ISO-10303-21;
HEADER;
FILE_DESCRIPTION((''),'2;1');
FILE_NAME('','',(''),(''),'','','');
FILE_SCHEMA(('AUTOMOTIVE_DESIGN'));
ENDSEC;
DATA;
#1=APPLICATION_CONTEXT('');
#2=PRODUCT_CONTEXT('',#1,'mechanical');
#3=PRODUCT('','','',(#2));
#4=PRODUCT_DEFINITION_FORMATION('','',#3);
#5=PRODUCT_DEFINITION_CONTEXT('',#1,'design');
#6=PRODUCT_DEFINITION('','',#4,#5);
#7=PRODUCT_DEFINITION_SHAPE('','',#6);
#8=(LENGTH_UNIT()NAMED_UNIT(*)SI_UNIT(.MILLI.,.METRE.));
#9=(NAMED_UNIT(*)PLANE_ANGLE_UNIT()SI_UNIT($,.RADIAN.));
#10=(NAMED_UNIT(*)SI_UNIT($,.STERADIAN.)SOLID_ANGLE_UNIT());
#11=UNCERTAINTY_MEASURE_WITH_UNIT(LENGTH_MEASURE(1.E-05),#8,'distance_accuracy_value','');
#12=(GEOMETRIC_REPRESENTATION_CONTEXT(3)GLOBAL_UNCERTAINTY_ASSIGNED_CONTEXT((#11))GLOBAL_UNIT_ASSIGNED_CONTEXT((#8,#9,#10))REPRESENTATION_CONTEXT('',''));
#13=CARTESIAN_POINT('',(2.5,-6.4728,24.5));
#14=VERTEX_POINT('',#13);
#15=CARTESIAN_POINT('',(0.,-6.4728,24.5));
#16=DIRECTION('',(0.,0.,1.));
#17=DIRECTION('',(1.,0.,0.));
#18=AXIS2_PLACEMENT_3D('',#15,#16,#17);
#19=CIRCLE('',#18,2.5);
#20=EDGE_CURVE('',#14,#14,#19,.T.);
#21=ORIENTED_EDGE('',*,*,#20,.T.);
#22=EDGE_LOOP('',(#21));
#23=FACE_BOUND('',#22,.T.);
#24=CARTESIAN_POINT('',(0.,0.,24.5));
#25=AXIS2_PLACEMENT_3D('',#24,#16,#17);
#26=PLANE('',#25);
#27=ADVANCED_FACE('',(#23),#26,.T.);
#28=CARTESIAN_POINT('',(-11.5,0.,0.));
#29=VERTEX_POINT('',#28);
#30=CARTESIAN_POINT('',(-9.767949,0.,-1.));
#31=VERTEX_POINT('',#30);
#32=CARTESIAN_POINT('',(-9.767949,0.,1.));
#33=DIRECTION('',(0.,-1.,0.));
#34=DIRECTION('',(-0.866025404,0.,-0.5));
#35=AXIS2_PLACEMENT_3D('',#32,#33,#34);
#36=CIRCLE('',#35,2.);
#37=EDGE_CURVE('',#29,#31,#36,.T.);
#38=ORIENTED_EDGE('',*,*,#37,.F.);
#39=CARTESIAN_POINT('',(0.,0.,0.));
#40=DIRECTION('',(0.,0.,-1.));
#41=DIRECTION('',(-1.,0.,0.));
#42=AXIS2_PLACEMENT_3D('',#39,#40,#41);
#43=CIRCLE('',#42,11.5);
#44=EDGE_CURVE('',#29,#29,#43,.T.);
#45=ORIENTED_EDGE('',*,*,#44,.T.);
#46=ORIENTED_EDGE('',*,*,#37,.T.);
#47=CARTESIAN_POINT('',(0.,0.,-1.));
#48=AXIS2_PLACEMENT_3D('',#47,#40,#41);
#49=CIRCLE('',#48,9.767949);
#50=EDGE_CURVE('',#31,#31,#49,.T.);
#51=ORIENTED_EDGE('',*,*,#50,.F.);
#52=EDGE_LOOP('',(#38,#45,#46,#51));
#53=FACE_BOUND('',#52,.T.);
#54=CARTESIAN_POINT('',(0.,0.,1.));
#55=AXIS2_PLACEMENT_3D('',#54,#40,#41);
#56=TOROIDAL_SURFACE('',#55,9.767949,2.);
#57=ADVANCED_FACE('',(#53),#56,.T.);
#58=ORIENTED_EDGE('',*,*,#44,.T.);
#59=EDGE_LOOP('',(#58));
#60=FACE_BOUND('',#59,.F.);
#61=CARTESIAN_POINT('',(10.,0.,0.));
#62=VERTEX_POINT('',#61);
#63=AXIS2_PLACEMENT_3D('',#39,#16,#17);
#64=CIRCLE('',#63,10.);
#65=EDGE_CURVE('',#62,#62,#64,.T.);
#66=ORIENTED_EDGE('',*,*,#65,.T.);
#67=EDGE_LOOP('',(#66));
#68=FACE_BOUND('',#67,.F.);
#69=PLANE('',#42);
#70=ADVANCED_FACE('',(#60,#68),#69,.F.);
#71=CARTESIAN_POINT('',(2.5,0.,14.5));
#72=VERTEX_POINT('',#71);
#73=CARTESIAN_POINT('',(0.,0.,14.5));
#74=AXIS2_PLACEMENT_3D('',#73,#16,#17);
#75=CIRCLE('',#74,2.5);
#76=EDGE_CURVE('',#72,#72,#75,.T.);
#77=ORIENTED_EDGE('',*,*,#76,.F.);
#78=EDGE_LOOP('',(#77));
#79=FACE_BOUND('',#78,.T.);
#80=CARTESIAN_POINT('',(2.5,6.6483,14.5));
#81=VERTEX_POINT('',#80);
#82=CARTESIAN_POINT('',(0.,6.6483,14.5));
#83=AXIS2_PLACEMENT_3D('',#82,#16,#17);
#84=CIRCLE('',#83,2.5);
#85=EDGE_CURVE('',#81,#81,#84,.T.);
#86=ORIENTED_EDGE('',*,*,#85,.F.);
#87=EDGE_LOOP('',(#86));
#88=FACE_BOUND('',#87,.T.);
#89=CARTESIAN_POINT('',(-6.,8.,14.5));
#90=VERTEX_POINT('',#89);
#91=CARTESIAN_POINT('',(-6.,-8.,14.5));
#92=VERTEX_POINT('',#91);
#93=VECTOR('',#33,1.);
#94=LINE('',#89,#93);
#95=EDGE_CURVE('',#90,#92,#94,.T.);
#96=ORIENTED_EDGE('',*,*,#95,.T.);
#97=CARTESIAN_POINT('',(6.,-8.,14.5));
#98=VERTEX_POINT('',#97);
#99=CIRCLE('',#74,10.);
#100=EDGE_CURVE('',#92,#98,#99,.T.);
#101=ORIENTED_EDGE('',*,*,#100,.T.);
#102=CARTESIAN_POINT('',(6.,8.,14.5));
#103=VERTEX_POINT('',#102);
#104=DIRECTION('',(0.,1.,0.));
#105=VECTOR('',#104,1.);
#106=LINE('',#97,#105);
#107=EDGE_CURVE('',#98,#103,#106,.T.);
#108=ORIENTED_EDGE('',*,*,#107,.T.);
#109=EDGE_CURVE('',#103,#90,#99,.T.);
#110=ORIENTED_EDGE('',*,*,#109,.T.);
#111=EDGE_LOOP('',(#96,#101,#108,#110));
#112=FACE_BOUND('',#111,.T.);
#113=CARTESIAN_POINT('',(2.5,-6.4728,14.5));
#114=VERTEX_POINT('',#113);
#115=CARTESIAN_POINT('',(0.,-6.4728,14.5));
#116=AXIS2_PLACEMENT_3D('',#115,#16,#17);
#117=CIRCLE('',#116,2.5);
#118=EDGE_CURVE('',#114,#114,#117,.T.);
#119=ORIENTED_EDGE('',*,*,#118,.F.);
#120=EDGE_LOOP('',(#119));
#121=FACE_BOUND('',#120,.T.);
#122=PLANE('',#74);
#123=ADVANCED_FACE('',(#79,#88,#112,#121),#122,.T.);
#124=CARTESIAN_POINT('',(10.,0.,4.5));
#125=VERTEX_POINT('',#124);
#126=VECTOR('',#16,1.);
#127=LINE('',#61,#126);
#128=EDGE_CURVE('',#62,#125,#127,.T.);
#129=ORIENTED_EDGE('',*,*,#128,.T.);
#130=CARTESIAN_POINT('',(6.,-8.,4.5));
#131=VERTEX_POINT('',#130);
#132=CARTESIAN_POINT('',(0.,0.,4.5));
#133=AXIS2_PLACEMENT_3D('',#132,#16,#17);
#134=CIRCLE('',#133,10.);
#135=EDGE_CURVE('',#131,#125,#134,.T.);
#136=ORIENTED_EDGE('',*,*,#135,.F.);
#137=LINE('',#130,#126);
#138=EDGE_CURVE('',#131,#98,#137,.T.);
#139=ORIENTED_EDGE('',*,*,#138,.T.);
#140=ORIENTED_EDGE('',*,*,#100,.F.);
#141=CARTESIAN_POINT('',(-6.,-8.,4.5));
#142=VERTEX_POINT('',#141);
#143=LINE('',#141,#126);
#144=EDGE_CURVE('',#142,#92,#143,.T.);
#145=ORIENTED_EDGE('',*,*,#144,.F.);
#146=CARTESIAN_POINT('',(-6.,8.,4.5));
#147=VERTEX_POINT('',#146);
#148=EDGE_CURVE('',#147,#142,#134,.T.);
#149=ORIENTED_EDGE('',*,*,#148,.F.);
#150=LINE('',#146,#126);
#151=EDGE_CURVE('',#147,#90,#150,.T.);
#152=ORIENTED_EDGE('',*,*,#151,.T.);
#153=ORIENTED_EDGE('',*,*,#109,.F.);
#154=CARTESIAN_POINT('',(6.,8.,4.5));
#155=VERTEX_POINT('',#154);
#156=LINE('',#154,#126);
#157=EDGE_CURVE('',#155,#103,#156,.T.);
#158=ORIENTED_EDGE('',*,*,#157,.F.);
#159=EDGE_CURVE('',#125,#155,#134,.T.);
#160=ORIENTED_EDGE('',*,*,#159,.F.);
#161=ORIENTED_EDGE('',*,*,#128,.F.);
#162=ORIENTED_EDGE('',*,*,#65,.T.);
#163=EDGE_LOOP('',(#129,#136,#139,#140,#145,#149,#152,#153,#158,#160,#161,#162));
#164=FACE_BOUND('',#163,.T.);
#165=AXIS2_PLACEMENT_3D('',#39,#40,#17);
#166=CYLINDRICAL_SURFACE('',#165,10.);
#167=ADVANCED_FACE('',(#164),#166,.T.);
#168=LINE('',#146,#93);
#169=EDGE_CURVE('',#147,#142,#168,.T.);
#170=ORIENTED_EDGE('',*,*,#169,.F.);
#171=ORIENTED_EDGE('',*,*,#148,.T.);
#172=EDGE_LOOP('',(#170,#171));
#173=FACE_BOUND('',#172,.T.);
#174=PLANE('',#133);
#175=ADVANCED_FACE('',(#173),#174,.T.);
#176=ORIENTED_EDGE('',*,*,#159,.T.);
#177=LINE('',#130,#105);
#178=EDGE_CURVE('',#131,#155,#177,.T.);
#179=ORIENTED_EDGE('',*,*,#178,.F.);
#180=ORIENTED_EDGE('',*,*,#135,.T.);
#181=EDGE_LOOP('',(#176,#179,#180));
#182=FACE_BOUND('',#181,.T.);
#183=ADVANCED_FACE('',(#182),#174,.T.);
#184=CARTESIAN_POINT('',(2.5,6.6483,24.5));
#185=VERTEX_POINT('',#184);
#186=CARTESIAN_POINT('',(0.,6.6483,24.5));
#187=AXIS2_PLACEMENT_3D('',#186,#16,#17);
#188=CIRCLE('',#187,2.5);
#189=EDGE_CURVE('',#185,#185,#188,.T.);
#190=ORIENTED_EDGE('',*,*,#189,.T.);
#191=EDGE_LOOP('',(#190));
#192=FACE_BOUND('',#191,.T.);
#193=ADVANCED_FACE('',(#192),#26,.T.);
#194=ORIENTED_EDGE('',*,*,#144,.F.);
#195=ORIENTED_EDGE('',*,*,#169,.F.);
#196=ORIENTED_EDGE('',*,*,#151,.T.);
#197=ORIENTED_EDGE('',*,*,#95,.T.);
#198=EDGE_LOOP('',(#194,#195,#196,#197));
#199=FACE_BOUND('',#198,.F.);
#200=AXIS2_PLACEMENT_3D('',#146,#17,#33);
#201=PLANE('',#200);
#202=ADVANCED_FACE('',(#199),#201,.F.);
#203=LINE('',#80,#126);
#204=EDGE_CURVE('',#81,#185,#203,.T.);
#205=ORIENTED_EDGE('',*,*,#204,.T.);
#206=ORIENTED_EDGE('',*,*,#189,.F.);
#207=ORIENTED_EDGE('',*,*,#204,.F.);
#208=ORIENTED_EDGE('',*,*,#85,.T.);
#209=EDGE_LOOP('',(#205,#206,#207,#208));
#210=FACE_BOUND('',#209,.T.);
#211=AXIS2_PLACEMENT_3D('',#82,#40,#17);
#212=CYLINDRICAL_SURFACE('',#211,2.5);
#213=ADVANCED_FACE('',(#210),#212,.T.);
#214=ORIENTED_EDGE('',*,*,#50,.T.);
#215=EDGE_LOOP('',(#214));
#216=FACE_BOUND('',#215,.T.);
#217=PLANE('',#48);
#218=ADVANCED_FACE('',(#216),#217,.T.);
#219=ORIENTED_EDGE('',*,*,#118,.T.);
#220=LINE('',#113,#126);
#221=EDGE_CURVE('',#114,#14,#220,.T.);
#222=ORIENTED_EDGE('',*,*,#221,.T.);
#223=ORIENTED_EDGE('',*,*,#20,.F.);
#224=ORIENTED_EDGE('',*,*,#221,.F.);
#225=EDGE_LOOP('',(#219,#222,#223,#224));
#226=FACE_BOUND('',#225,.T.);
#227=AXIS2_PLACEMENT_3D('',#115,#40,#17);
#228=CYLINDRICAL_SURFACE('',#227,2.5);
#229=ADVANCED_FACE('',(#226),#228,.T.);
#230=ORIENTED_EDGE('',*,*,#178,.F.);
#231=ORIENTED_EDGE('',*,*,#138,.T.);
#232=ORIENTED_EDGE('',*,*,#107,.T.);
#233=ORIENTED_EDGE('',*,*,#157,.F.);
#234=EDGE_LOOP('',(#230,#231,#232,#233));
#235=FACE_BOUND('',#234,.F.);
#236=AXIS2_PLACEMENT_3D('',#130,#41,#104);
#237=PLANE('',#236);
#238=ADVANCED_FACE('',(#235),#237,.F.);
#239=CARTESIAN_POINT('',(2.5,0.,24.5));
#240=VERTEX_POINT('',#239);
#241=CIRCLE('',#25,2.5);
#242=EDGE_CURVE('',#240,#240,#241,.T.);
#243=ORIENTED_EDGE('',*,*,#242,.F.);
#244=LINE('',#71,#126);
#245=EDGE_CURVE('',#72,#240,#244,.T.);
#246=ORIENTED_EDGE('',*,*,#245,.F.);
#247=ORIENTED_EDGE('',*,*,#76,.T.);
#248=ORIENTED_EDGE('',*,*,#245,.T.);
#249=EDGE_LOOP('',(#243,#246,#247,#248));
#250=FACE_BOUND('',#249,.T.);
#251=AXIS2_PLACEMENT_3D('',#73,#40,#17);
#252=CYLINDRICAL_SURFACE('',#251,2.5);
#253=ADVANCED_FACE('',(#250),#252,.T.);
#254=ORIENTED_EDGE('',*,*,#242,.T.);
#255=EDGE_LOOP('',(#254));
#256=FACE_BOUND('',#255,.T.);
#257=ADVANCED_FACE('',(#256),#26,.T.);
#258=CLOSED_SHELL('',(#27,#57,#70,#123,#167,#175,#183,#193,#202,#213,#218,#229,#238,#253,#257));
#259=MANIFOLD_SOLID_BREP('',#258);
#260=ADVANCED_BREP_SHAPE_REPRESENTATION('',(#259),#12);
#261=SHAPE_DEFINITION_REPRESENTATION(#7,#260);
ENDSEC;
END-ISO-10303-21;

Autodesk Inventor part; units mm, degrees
ref_plane "YZ Plane" through (0, 0, 0) normal (1, 0, 0) x (0, 1, 0)
ref_plane "XZ Plane" through (0, 0, 0) normal (0, 1, 0) x (-1, 0, 0)
ref_plane "XY Plane" through (0, 0, 0) normal (0, 0, 1) x (1, 0, 0)
sketch "Sketch1" plane through (0, 0, 0) normal (0, 0, 1) x (1, 0, 0)
  circle A0 centre (0, 0) radius 10
  dimension "d0" = 20
extrude "Extrusion1" add sketch "Sketch1" along normal blind 4.5
sketch "Sketch2" plane through (0, 0, 4.5) normal (0, 0, 1) x (1, 0, 0)
  circle A0 centre (0, 0) radius 10 projected
  line L0 (-6, -8) -> (6, -8)
  line L1 (6, -8) -> (6, 8)
  line L2 (6, 8) -> (-6, 8)
  line L3 (-6, 8) -> (-6, -8)
  line L4 (-6, -8) -> (6, 8) construction
  line L5 (6, -8) -> (-6, 8) construction
  arc A1 (6, 8) -> (-6, 8) centre (0, 0) ccw
  arc A2 (-6, -8) -> (6, -8) centre (0, 0) ccw
  dimension "d3" = 12
extrude "Extrusion2" add sketch "Sketch2" along normal blind 10 contours L2 A0 | L1 L0 L3 L2 | A0 L0
sketch "Sketch3" plane through (0, 0, 0) normal (0, 0, -1) x (-1, 0, 0)
  circle A0 centre (0, 0) radius 11.5
  dimension "d6" = 23
extrude "Extrusion3" add sketch "Sketch3" along normal blind 1
fillet "Fillet1" radius 2 1 edges at (11.5, 0, -1)
sketch "Sketch4" plane through (0, 0, 14.5) normal (0, 0, 1) x (1, 0, 0)
  circle A0 centre (0, 6.6483) radius 2.5
  circle A1 centre (0, 0) radius 2.5
  circle A2 centre (0, -6.4728) radius 2.5
  dimension "d10" = 5
  dimension "d11" = 5
  dimension "d12" = 5
extrude "Extrusion4" add sketch "Sketch4" along normal blind 10
properties part number "Switch_DC_Pilot"
